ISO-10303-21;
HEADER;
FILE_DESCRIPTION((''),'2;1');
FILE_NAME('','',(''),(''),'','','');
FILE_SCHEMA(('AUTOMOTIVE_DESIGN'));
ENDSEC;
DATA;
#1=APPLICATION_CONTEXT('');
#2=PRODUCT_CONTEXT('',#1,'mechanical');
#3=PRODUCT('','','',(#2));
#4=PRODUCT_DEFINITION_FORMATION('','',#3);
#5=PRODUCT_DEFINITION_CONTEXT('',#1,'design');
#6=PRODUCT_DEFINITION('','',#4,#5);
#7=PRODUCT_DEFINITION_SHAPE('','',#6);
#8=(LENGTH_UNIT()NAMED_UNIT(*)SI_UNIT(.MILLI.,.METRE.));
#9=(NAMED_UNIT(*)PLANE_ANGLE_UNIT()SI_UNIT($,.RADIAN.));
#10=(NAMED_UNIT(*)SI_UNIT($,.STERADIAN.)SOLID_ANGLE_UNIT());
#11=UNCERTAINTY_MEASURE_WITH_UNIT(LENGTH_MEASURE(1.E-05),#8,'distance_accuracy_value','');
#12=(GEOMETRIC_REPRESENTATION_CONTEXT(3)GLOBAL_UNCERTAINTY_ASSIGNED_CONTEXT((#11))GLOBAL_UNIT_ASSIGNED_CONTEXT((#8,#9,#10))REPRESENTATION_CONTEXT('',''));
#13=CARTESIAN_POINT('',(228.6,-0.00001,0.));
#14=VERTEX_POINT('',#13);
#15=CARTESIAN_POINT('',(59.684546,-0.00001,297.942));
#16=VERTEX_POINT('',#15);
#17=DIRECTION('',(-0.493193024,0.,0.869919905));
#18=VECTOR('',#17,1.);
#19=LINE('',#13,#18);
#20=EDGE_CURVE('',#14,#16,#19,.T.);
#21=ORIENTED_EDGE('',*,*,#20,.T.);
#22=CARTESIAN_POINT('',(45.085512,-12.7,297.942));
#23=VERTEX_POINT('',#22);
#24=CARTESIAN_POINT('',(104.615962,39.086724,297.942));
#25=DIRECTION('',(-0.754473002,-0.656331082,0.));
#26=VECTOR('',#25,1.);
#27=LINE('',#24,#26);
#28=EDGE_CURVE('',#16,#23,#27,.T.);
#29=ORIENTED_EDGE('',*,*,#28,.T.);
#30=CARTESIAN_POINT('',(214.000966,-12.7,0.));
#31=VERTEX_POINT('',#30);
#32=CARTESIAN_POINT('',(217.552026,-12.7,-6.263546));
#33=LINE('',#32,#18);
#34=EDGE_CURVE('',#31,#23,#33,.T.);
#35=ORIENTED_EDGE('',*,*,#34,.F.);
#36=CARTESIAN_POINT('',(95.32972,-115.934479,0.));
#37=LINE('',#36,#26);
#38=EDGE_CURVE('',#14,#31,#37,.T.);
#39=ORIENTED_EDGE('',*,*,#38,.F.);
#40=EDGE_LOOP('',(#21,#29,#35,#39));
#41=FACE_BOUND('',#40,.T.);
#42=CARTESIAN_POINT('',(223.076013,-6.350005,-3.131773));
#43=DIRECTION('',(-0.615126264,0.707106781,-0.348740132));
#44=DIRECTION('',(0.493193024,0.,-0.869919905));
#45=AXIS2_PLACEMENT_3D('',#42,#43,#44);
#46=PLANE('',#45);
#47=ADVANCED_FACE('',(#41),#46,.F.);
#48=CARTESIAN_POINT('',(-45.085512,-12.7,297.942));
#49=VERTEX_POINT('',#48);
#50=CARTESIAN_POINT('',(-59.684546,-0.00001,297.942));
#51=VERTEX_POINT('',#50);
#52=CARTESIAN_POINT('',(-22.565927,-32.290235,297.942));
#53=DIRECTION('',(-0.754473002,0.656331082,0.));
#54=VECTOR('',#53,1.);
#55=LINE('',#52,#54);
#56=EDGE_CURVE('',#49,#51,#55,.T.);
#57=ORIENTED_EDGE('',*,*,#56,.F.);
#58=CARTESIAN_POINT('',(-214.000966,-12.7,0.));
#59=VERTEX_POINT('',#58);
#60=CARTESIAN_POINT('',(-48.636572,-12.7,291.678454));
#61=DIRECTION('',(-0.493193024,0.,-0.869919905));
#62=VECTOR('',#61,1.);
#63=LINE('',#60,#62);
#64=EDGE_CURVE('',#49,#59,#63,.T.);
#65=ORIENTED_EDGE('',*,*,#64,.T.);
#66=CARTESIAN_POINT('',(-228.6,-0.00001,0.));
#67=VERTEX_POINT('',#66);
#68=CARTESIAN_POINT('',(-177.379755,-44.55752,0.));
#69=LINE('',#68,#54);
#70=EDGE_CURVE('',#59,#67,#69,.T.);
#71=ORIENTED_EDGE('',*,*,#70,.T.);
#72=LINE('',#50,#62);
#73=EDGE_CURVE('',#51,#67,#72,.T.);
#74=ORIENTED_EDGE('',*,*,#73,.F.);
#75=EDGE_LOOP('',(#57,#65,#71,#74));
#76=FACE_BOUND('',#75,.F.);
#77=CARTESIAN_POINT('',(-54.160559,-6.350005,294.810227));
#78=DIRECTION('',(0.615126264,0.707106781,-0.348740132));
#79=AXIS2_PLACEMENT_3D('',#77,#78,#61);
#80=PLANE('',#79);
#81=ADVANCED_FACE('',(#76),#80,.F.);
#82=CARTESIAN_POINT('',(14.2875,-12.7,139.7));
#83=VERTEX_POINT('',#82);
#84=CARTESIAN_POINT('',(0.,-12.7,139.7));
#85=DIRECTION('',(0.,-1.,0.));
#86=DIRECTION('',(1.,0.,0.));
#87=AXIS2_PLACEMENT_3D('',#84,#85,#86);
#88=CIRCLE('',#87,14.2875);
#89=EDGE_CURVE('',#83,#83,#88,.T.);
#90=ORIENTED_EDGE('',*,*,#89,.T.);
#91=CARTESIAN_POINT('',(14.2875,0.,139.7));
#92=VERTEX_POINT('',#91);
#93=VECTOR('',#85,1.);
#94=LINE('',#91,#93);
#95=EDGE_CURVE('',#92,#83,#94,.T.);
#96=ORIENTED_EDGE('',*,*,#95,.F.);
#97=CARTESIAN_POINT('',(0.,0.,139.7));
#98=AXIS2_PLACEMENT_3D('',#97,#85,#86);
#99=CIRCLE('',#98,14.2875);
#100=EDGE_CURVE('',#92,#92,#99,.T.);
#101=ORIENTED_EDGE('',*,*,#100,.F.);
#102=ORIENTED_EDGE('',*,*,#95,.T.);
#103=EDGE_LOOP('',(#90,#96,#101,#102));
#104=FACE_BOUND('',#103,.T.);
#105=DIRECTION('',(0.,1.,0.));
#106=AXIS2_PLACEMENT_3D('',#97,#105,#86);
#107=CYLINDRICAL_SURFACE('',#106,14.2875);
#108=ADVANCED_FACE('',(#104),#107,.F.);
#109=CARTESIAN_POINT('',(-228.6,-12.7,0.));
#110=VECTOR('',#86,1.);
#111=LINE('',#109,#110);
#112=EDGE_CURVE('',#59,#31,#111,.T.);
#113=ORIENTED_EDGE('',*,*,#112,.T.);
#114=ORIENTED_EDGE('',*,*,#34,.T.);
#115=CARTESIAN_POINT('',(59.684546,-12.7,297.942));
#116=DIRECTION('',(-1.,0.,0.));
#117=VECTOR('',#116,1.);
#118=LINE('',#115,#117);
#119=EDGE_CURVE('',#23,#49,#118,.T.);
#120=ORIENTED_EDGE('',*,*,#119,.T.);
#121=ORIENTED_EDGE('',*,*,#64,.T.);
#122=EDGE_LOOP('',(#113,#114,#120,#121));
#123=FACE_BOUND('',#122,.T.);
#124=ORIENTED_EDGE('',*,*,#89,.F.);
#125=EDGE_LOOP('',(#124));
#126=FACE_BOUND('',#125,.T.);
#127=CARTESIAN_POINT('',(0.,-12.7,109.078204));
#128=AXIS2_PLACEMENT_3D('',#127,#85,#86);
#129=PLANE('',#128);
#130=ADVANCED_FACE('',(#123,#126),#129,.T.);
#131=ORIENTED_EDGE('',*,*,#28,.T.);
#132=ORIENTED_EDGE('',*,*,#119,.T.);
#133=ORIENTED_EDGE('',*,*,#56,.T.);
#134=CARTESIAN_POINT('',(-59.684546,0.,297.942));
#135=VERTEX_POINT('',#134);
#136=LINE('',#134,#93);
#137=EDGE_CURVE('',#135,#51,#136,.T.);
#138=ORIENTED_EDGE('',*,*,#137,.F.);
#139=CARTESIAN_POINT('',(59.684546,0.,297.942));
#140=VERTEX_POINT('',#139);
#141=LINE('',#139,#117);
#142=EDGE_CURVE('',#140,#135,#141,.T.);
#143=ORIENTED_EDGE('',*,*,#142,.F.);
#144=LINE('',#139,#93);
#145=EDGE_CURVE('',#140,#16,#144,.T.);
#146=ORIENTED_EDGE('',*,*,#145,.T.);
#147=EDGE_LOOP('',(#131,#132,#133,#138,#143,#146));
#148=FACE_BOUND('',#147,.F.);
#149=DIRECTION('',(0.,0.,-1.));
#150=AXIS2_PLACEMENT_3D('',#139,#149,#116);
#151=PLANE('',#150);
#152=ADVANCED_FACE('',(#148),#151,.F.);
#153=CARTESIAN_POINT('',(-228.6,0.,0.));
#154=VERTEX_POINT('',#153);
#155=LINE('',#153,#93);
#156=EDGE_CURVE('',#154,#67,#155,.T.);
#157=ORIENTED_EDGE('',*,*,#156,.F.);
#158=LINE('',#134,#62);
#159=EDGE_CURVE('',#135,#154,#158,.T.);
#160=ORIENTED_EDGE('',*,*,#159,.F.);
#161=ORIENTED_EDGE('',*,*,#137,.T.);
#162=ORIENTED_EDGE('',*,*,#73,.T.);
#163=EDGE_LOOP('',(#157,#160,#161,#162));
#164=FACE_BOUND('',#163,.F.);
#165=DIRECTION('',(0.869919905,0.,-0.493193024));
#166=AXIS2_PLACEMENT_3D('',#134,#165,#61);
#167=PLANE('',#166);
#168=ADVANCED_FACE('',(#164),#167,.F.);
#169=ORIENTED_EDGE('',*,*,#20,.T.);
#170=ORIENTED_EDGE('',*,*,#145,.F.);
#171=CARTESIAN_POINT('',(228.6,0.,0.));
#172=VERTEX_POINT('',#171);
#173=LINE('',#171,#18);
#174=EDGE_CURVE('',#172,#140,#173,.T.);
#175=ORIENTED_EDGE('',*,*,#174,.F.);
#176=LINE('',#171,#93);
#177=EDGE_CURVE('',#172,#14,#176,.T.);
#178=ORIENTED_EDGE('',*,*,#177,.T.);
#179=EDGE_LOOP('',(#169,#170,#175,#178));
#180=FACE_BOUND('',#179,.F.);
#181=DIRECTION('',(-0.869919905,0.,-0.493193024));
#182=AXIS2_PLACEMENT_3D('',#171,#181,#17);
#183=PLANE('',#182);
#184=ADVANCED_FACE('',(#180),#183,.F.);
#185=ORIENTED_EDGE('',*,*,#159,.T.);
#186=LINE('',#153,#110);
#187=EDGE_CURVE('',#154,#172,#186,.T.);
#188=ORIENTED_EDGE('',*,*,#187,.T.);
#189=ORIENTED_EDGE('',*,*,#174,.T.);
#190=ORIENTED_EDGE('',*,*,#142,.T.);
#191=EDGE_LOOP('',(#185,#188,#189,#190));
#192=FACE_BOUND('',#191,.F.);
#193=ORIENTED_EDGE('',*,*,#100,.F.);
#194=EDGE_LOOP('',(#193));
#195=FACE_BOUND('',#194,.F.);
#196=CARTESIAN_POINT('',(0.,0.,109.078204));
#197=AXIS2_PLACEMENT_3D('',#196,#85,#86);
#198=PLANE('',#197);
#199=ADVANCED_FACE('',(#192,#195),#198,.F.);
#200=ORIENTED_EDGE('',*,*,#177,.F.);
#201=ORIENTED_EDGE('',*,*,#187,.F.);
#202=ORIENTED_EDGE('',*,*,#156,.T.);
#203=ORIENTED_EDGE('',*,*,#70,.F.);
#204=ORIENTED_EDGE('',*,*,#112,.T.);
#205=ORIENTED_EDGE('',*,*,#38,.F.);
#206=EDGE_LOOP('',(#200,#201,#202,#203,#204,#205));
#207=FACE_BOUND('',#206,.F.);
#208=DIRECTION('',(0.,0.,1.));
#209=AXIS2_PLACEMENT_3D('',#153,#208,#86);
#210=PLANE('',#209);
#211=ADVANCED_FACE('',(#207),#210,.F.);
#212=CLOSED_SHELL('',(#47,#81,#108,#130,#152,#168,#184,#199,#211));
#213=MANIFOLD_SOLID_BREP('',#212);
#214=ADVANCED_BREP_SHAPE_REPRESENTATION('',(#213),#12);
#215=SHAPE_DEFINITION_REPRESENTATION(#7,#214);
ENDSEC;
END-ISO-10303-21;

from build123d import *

# Parameters (mm, degrees)
F0_R     = 14.2875
F1_DEPTH = 12.7
F2_SIZE2 = 12.69999
F2_SIZE  = 12.69999
F3_SIZE2 = 12.69999
F3_SIZE  = 12.69999


# Not quite as in the source:
# - a fillet or chamfer is up to 0.001 mm smaller than in the source, because OpenCascade refuses the exact size


with BuildPart() as f1:
    # F0 (on Front) → F1 (new body)
    with BuildSketch(Plane.XZ):
        Polygon((-228.6, 0), (228.6, 0), (59.6845457723, 297.942), (-59.6845457723, 297.942), align=None)
        with Locations((0, 139.7)):
            Circle(F0_R, mode=Mode.SUBTRACT)
    extrude(amount=F1_DEPTH)

    # F2 (size 12.7 and 12.7 in the source; OpenCascade refuses exactly that, so slightly less here)
    f2_edges = [f1.edges().sort_by_distance(p)[0] for p in [
        (144.142273, -12.7, 148.971),
    ]]
    chamfer(f2_edges, length=F2_SIZE, length2=F2_SIZE2)

    # F3 (size 12.7 and 12.7 in the source; OpenCascade refuses exactly that, so slightly less here)
    f3_edges = [f1.edges().sort_by_distance(p)[0] for p in [
        (-144.142273, -12.7, 148.971),
    ]]
    chamfer(f3_edges, length=F3_SIZE, length2=F3_SIZE2)


solid = f1.part
